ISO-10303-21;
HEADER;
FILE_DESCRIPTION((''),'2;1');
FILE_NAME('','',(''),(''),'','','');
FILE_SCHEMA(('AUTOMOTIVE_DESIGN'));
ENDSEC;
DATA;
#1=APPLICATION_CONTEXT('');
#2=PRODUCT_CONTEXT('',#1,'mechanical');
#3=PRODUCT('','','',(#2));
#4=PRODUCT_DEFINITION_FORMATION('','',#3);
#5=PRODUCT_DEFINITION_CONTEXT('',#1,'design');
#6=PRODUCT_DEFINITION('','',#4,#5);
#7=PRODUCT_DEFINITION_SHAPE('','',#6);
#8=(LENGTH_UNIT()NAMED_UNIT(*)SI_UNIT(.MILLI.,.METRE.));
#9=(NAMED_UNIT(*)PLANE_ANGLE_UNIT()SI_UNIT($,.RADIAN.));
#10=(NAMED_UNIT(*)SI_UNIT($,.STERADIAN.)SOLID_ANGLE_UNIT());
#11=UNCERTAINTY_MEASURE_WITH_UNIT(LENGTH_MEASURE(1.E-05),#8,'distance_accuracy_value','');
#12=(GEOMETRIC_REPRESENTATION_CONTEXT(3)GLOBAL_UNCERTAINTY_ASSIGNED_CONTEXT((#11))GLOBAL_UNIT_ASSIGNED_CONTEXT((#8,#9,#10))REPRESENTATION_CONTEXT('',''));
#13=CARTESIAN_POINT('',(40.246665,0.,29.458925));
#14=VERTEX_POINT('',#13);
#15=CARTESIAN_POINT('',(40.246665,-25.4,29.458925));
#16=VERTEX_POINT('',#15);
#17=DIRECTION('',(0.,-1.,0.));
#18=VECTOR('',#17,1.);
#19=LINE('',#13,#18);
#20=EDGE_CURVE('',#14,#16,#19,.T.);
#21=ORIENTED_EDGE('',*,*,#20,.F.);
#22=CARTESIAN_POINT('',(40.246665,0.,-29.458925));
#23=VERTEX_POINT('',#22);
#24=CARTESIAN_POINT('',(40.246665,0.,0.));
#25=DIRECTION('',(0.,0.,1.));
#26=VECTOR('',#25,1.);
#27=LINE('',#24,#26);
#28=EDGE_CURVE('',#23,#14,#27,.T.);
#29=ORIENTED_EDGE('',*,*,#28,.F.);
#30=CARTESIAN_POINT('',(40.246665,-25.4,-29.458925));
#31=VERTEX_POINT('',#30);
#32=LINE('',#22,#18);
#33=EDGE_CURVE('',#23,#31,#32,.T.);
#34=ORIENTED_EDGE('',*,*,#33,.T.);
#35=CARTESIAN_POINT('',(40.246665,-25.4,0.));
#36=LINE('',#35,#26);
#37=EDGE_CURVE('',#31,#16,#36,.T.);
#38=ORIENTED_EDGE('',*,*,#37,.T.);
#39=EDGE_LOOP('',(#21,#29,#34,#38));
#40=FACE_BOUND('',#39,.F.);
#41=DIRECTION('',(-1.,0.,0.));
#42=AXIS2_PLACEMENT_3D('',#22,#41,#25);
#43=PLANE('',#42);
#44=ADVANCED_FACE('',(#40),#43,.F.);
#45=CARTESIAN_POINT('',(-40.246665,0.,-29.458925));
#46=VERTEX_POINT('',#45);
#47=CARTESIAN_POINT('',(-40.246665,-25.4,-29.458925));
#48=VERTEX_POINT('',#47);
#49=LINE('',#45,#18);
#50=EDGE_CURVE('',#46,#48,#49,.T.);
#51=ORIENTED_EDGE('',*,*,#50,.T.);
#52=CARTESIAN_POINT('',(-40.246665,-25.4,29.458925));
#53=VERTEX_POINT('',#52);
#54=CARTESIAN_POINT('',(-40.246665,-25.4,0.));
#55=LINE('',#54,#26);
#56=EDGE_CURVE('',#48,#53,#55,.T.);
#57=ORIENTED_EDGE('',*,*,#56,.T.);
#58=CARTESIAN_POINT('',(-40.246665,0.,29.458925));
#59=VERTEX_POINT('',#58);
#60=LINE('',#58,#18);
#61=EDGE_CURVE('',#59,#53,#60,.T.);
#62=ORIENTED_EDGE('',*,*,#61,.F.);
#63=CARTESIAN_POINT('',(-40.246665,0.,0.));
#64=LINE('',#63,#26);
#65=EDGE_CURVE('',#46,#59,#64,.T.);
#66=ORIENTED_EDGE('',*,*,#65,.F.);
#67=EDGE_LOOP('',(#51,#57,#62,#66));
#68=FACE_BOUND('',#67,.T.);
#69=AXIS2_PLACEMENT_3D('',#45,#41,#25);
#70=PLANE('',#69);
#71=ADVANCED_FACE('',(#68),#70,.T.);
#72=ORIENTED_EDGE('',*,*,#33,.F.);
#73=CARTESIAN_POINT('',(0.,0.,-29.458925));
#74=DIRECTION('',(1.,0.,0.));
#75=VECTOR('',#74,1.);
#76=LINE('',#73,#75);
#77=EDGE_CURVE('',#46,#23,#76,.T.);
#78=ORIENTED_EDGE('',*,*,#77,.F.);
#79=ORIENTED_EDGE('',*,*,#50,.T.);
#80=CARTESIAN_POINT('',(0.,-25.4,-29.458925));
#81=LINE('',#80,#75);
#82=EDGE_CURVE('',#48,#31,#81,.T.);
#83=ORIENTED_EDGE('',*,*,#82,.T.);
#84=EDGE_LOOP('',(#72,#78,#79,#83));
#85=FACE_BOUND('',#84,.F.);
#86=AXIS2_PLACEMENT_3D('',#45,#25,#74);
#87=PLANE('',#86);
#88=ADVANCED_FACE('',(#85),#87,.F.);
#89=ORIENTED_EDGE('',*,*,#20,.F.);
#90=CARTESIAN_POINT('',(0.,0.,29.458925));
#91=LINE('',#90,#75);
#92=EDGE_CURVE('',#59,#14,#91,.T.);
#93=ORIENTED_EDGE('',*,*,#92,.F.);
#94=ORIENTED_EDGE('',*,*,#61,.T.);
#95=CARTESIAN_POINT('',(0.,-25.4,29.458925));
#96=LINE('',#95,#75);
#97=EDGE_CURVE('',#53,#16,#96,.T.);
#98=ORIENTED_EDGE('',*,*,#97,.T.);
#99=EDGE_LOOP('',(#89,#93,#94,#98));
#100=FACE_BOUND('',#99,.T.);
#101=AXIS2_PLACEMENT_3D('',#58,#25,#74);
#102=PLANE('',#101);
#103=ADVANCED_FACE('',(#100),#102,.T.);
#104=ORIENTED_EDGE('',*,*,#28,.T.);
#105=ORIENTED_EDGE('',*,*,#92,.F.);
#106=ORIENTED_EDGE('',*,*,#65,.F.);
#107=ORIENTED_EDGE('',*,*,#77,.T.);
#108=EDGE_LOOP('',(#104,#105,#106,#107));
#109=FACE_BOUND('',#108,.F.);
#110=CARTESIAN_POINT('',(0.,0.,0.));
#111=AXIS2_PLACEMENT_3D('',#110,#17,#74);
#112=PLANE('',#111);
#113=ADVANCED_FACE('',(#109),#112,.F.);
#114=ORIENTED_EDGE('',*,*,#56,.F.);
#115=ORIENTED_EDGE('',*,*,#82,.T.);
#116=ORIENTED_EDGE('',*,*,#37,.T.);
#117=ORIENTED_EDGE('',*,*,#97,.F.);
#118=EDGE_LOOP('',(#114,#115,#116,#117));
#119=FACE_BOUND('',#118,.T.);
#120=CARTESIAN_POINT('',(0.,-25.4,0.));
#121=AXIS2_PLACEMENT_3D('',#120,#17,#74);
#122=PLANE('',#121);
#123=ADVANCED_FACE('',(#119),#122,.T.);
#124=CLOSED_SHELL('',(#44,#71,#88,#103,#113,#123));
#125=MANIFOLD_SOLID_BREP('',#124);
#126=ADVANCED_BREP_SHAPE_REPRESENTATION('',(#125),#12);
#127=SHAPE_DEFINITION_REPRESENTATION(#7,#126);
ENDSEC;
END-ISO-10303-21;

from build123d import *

# Parameters (mm, degrees)
F0_W     = 80.4933309555
F0_H     = 58.917850256
F1_DEPTH = 25.4


# Not quite as in the source:
# - the program builds the solid bodies; features that only make, move or delete a surface that nothing else refers to are left out


with BuildPart() as f1:
    # F0 (on Front) → F1 (new body)
    with BuildSketch(Plane.XZ):
        Rectangle(F0_W, F0_H)
    extrude(amount=F1_DEPTH)


solid = f1.part
